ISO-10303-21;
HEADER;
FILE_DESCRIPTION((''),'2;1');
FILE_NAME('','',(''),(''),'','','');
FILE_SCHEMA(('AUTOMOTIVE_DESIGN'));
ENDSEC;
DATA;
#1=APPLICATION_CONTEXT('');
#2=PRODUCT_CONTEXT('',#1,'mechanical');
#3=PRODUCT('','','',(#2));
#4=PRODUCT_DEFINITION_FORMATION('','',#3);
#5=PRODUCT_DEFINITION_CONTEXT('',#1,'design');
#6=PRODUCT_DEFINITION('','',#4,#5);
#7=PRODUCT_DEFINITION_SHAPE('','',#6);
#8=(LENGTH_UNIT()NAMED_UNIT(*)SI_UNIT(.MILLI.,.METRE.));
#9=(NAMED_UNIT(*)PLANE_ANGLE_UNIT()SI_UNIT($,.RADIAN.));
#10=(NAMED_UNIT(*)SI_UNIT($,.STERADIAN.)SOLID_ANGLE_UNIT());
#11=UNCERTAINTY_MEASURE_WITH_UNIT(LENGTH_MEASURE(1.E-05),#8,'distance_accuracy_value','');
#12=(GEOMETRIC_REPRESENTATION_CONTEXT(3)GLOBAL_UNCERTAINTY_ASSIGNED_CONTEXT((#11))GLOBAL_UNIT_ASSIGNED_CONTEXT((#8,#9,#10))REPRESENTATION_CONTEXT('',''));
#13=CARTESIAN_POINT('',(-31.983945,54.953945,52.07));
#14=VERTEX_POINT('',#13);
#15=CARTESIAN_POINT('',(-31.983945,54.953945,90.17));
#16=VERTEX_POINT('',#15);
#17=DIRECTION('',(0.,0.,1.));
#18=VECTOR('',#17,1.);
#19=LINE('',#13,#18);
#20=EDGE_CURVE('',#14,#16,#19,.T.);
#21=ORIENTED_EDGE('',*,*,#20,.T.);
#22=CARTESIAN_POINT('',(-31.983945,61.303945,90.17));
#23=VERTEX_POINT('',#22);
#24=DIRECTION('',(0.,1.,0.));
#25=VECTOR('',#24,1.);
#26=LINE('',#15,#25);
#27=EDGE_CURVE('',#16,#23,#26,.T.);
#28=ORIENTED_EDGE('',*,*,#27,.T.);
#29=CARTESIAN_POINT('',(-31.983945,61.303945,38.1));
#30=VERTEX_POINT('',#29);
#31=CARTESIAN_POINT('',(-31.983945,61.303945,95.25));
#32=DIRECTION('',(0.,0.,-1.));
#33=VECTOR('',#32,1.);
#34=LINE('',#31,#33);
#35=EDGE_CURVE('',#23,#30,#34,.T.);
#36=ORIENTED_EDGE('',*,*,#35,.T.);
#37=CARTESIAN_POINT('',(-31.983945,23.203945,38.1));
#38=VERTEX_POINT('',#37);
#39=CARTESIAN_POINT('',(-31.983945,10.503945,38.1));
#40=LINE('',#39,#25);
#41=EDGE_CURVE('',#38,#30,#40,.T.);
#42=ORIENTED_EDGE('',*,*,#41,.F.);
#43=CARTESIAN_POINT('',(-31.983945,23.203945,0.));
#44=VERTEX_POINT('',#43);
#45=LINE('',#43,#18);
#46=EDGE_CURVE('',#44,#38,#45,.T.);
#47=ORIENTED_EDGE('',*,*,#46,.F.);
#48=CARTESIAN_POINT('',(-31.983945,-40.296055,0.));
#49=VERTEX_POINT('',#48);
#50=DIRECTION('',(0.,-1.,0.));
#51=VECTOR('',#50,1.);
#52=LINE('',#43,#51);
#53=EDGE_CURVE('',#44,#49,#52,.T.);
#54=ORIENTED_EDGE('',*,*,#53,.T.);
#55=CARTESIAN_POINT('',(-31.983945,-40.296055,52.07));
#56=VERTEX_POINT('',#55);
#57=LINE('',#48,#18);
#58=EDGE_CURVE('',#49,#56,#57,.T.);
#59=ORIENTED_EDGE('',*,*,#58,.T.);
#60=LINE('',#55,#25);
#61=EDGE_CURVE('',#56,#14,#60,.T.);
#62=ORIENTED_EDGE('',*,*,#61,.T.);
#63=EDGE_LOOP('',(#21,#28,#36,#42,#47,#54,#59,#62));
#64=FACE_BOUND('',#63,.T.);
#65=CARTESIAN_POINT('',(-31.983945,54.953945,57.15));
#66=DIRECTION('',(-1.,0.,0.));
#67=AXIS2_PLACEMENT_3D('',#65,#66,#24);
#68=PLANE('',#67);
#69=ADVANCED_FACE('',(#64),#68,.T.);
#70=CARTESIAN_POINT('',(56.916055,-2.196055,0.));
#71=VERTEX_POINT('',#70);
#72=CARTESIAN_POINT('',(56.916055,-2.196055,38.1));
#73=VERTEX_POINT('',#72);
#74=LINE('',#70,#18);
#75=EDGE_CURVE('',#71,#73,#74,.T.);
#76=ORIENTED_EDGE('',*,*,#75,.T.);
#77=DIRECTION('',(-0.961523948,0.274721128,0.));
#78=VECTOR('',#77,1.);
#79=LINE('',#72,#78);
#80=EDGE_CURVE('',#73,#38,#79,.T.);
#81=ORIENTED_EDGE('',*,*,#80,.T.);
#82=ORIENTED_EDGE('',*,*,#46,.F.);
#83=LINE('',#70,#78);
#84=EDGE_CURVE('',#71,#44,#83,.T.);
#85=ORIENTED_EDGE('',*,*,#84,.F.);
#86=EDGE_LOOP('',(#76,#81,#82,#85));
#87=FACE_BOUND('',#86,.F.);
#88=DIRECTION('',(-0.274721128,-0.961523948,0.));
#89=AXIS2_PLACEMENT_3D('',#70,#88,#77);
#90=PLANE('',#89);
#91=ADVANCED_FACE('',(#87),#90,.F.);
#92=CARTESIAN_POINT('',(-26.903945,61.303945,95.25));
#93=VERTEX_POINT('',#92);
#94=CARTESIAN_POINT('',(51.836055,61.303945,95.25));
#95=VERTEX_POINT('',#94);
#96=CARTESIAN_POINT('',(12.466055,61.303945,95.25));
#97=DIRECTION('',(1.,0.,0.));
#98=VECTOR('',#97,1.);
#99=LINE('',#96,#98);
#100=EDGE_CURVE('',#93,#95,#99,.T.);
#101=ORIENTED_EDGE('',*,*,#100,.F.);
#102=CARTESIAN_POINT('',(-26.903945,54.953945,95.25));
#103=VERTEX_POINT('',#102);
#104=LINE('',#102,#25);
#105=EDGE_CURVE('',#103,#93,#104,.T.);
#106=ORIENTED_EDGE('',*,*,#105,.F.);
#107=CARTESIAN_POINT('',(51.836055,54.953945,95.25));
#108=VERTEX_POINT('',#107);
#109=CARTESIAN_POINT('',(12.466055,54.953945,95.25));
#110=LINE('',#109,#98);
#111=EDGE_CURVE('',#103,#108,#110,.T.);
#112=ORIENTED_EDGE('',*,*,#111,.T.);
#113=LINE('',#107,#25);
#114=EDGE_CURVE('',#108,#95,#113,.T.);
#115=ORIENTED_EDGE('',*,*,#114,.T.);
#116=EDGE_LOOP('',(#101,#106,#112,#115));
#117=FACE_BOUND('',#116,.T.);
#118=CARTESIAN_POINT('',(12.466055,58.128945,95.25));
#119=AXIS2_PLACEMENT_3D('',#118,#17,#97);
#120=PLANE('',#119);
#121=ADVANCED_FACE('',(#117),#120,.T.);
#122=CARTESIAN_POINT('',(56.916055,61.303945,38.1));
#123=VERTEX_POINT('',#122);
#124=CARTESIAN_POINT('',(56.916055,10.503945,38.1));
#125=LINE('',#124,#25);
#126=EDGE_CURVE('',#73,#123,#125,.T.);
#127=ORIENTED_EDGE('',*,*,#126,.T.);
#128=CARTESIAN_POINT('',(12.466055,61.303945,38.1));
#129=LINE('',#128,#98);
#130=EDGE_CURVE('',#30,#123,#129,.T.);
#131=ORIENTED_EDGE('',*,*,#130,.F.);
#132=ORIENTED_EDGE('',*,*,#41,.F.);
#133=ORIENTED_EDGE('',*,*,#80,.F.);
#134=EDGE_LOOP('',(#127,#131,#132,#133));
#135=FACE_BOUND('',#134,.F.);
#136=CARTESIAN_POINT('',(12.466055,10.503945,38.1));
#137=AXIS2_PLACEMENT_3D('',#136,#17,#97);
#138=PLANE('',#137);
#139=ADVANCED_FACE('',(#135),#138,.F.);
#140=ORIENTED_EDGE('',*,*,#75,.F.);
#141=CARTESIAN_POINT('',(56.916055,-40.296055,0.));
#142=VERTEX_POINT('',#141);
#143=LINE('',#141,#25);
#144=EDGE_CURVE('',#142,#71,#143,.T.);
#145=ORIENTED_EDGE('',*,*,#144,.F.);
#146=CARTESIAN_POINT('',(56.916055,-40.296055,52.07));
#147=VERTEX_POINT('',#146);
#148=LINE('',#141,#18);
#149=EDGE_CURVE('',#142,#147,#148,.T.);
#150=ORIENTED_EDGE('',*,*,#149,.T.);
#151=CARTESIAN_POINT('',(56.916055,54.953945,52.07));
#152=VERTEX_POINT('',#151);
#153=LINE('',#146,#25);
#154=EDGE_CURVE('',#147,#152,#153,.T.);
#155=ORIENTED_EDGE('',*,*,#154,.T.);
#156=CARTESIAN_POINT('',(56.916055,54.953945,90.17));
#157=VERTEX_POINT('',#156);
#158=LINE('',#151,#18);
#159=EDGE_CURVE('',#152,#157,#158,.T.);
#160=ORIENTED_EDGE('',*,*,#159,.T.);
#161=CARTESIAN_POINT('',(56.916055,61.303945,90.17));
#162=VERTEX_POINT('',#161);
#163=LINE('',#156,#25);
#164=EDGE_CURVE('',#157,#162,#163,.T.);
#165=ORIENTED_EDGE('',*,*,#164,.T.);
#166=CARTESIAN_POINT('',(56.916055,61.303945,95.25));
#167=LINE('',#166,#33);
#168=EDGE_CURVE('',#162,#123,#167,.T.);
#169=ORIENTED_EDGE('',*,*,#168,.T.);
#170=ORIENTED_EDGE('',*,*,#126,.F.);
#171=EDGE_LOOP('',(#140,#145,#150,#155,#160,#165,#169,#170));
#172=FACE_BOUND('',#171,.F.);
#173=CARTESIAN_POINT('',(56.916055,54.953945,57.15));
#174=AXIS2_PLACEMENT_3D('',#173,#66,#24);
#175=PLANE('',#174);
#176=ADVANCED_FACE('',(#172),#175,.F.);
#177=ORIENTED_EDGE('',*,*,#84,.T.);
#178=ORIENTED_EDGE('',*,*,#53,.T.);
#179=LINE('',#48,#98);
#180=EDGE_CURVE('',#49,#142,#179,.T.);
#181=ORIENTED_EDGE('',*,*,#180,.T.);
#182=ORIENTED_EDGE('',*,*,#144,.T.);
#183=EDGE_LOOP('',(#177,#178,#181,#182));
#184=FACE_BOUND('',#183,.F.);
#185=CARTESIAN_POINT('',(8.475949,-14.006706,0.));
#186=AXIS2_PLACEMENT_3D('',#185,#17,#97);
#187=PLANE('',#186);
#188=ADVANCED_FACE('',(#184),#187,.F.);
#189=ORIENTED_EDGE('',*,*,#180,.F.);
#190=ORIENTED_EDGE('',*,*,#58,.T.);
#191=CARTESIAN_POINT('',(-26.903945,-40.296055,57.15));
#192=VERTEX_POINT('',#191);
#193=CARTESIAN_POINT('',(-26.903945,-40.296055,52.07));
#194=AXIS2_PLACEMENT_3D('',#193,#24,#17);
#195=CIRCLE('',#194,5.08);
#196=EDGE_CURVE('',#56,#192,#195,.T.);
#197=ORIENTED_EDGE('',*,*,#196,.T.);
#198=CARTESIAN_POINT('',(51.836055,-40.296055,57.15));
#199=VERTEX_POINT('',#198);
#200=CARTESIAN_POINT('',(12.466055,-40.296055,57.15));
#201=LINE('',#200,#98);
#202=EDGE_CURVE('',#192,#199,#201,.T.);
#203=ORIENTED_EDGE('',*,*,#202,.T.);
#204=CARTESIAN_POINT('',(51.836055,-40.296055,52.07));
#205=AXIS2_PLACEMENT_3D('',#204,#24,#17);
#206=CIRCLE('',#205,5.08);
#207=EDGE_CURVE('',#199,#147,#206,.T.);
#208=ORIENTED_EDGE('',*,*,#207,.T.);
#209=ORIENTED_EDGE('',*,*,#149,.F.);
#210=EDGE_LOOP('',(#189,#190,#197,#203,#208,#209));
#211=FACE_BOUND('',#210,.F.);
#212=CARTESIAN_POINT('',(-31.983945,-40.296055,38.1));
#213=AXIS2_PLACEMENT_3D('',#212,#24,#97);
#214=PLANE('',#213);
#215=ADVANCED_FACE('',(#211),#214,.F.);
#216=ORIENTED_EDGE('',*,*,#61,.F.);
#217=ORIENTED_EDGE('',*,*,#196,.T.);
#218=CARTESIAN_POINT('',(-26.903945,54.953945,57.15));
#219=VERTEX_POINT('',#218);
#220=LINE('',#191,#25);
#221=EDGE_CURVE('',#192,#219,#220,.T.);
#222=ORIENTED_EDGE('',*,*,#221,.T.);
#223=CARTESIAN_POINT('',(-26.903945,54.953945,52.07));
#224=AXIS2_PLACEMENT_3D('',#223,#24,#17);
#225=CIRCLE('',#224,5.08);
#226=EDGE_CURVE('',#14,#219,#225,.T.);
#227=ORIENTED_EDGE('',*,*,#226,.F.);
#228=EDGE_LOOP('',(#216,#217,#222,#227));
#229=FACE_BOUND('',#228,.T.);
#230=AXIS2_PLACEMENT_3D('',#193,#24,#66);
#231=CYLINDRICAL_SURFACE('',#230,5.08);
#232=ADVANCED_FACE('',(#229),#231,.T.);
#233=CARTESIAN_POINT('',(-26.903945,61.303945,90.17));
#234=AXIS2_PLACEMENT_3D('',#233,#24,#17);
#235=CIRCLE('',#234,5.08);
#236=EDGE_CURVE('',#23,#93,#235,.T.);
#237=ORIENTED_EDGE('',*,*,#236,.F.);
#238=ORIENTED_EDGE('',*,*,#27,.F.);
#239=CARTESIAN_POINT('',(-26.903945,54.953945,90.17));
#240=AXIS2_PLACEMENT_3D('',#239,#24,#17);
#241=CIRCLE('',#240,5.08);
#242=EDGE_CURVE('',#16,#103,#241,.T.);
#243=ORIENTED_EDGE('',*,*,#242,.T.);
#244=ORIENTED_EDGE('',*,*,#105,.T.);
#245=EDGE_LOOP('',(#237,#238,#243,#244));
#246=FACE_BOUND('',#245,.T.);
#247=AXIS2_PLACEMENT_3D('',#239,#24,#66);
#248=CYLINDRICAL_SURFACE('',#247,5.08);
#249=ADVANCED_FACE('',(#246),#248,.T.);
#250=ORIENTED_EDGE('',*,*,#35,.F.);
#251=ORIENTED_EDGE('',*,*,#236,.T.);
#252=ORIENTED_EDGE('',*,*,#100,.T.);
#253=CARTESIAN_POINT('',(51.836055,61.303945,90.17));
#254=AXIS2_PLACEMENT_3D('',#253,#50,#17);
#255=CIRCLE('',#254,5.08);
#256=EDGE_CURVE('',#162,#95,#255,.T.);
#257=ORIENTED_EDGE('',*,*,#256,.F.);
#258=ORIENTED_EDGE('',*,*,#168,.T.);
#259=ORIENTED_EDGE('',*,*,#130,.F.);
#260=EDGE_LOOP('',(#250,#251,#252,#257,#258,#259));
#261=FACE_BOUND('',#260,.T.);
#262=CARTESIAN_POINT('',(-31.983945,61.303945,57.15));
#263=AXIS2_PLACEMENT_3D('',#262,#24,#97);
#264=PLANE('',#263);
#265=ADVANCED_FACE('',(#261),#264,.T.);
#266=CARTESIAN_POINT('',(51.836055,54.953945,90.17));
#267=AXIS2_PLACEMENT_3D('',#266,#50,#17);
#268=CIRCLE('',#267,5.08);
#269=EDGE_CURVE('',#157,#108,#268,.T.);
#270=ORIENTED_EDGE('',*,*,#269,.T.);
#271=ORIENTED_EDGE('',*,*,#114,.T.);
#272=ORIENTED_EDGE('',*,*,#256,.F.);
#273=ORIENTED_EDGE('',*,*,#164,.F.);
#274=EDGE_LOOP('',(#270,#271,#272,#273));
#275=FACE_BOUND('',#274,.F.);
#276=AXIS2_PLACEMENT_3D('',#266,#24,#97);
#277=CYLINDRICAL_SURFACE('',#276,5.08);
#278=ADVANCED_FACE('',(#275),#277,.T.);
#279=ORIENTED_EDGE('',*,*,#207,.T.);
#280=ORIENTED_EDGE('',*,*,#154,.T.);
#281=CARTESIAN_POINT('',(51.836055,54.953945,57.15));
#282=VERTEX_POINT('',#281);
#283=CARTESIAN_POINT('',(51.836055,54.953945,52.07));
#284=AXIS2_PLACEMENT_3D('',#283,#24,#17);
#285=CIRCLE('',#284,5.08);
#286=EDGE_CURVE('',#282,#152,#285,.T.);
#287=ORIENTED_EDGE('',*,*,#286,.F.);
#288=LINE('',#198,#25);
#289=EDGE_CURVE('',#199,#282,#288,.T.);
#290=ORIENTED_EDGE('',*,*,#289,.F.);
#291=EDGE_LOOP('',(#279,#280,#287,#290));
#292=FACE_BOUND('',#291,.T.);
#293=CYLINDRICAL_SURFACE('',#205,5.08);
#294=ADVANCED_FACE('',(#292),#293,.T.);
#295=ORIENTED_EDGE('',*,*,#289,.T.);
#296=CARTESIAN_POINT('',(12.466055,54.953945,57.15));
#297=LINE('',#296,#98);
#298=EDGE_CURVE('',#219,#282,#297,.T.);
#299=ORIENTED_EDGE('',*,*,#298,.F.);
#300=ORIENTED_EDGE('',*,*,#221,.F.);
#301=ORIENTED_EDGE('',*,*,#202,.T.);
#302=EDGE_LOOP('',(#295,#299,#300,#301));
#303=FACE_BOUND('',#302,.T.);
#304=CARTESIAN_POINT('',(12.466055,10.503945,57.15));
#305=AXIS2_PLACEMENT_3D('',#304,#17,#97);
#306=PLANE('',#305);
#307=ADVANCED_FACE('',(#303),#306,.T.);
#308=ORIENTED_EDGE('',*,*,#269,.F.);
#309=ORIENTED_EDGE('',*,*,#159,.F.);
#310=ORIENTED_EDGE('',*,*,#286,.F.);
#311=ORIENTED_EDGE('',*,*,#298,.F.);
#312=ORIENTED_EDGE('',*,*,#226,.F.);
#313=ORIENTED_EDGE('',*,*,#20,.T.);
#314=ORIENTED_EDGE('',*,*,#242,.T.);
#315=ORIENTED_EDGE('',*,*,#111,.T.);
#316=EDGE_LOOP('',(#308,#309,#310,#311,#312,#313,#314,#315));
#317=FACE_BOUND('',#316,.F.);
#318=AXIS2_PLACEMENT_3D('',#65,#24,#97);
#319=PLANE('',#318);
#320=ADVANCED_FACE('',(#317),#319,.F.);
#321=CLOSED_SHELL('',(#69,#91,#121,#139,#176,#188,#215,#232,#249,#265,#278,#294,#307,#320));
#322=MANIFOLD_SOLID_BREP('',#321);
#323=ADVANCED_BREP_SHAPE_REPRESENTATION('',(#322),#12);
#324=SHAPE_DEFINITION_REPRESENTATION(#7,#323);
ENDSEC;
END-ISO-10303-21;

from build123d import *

# Parameters (mm, degrees)
F1_DEPTH = 38.1
F2_W     = 88.9
F2_H     = 101.6
F3_DEPTH = 19.05
F4_W     = 88.9
F4_H     = 6.35
F5_DEPTH = 38.1
F6_R     = 5.08


# Not quite as in the source:
# - a feature names something its author has since deleted; it is built from what else it names


with BuildPart() as f1:
    # F0 (on Top) → F1 (new body)
    with BuildSketch(Plane.XY):
        Polygon((-31.983944577, 23.2039450469), (-31.983944577, -40.2960549531), (56.916055423, -40.2960549531), (56.916055423, -2.1960549531), align=None)
    extrude(amount=F1_DEPTH)

    # F2 (on face) → F3 (join)
    with BuildSketch(Plane.XY.offset(38.1)):
        with Locations((12.466055423, 10.5039450469)):
            Rectangle(F2_W, F2_H)
    extrude(amount=F3_DEPTH)

    # F4 (on face) → F5 (join)
    with BuildSketch(Plane.XY.offset(57.15)):
        with Locations((12.466055423, 58.1289450469)):
            Rectangle(F4_W, F4_H)
    extrude(amount=F5_DEPTH)

    # F6
    f6_edges = [f1.edges().sort_by_distance(p)[0] for p in [
        (56.916055, 7.328945, 57.15),
        (-31.983945, 7.328945, 57.15),
        (-31.983945, 58.128945, 95.25),
        (56.916055, 58.128945, 95.25),
    ]]
    fillet(f6_edges, radius=F6_R)


solid = f1.part
